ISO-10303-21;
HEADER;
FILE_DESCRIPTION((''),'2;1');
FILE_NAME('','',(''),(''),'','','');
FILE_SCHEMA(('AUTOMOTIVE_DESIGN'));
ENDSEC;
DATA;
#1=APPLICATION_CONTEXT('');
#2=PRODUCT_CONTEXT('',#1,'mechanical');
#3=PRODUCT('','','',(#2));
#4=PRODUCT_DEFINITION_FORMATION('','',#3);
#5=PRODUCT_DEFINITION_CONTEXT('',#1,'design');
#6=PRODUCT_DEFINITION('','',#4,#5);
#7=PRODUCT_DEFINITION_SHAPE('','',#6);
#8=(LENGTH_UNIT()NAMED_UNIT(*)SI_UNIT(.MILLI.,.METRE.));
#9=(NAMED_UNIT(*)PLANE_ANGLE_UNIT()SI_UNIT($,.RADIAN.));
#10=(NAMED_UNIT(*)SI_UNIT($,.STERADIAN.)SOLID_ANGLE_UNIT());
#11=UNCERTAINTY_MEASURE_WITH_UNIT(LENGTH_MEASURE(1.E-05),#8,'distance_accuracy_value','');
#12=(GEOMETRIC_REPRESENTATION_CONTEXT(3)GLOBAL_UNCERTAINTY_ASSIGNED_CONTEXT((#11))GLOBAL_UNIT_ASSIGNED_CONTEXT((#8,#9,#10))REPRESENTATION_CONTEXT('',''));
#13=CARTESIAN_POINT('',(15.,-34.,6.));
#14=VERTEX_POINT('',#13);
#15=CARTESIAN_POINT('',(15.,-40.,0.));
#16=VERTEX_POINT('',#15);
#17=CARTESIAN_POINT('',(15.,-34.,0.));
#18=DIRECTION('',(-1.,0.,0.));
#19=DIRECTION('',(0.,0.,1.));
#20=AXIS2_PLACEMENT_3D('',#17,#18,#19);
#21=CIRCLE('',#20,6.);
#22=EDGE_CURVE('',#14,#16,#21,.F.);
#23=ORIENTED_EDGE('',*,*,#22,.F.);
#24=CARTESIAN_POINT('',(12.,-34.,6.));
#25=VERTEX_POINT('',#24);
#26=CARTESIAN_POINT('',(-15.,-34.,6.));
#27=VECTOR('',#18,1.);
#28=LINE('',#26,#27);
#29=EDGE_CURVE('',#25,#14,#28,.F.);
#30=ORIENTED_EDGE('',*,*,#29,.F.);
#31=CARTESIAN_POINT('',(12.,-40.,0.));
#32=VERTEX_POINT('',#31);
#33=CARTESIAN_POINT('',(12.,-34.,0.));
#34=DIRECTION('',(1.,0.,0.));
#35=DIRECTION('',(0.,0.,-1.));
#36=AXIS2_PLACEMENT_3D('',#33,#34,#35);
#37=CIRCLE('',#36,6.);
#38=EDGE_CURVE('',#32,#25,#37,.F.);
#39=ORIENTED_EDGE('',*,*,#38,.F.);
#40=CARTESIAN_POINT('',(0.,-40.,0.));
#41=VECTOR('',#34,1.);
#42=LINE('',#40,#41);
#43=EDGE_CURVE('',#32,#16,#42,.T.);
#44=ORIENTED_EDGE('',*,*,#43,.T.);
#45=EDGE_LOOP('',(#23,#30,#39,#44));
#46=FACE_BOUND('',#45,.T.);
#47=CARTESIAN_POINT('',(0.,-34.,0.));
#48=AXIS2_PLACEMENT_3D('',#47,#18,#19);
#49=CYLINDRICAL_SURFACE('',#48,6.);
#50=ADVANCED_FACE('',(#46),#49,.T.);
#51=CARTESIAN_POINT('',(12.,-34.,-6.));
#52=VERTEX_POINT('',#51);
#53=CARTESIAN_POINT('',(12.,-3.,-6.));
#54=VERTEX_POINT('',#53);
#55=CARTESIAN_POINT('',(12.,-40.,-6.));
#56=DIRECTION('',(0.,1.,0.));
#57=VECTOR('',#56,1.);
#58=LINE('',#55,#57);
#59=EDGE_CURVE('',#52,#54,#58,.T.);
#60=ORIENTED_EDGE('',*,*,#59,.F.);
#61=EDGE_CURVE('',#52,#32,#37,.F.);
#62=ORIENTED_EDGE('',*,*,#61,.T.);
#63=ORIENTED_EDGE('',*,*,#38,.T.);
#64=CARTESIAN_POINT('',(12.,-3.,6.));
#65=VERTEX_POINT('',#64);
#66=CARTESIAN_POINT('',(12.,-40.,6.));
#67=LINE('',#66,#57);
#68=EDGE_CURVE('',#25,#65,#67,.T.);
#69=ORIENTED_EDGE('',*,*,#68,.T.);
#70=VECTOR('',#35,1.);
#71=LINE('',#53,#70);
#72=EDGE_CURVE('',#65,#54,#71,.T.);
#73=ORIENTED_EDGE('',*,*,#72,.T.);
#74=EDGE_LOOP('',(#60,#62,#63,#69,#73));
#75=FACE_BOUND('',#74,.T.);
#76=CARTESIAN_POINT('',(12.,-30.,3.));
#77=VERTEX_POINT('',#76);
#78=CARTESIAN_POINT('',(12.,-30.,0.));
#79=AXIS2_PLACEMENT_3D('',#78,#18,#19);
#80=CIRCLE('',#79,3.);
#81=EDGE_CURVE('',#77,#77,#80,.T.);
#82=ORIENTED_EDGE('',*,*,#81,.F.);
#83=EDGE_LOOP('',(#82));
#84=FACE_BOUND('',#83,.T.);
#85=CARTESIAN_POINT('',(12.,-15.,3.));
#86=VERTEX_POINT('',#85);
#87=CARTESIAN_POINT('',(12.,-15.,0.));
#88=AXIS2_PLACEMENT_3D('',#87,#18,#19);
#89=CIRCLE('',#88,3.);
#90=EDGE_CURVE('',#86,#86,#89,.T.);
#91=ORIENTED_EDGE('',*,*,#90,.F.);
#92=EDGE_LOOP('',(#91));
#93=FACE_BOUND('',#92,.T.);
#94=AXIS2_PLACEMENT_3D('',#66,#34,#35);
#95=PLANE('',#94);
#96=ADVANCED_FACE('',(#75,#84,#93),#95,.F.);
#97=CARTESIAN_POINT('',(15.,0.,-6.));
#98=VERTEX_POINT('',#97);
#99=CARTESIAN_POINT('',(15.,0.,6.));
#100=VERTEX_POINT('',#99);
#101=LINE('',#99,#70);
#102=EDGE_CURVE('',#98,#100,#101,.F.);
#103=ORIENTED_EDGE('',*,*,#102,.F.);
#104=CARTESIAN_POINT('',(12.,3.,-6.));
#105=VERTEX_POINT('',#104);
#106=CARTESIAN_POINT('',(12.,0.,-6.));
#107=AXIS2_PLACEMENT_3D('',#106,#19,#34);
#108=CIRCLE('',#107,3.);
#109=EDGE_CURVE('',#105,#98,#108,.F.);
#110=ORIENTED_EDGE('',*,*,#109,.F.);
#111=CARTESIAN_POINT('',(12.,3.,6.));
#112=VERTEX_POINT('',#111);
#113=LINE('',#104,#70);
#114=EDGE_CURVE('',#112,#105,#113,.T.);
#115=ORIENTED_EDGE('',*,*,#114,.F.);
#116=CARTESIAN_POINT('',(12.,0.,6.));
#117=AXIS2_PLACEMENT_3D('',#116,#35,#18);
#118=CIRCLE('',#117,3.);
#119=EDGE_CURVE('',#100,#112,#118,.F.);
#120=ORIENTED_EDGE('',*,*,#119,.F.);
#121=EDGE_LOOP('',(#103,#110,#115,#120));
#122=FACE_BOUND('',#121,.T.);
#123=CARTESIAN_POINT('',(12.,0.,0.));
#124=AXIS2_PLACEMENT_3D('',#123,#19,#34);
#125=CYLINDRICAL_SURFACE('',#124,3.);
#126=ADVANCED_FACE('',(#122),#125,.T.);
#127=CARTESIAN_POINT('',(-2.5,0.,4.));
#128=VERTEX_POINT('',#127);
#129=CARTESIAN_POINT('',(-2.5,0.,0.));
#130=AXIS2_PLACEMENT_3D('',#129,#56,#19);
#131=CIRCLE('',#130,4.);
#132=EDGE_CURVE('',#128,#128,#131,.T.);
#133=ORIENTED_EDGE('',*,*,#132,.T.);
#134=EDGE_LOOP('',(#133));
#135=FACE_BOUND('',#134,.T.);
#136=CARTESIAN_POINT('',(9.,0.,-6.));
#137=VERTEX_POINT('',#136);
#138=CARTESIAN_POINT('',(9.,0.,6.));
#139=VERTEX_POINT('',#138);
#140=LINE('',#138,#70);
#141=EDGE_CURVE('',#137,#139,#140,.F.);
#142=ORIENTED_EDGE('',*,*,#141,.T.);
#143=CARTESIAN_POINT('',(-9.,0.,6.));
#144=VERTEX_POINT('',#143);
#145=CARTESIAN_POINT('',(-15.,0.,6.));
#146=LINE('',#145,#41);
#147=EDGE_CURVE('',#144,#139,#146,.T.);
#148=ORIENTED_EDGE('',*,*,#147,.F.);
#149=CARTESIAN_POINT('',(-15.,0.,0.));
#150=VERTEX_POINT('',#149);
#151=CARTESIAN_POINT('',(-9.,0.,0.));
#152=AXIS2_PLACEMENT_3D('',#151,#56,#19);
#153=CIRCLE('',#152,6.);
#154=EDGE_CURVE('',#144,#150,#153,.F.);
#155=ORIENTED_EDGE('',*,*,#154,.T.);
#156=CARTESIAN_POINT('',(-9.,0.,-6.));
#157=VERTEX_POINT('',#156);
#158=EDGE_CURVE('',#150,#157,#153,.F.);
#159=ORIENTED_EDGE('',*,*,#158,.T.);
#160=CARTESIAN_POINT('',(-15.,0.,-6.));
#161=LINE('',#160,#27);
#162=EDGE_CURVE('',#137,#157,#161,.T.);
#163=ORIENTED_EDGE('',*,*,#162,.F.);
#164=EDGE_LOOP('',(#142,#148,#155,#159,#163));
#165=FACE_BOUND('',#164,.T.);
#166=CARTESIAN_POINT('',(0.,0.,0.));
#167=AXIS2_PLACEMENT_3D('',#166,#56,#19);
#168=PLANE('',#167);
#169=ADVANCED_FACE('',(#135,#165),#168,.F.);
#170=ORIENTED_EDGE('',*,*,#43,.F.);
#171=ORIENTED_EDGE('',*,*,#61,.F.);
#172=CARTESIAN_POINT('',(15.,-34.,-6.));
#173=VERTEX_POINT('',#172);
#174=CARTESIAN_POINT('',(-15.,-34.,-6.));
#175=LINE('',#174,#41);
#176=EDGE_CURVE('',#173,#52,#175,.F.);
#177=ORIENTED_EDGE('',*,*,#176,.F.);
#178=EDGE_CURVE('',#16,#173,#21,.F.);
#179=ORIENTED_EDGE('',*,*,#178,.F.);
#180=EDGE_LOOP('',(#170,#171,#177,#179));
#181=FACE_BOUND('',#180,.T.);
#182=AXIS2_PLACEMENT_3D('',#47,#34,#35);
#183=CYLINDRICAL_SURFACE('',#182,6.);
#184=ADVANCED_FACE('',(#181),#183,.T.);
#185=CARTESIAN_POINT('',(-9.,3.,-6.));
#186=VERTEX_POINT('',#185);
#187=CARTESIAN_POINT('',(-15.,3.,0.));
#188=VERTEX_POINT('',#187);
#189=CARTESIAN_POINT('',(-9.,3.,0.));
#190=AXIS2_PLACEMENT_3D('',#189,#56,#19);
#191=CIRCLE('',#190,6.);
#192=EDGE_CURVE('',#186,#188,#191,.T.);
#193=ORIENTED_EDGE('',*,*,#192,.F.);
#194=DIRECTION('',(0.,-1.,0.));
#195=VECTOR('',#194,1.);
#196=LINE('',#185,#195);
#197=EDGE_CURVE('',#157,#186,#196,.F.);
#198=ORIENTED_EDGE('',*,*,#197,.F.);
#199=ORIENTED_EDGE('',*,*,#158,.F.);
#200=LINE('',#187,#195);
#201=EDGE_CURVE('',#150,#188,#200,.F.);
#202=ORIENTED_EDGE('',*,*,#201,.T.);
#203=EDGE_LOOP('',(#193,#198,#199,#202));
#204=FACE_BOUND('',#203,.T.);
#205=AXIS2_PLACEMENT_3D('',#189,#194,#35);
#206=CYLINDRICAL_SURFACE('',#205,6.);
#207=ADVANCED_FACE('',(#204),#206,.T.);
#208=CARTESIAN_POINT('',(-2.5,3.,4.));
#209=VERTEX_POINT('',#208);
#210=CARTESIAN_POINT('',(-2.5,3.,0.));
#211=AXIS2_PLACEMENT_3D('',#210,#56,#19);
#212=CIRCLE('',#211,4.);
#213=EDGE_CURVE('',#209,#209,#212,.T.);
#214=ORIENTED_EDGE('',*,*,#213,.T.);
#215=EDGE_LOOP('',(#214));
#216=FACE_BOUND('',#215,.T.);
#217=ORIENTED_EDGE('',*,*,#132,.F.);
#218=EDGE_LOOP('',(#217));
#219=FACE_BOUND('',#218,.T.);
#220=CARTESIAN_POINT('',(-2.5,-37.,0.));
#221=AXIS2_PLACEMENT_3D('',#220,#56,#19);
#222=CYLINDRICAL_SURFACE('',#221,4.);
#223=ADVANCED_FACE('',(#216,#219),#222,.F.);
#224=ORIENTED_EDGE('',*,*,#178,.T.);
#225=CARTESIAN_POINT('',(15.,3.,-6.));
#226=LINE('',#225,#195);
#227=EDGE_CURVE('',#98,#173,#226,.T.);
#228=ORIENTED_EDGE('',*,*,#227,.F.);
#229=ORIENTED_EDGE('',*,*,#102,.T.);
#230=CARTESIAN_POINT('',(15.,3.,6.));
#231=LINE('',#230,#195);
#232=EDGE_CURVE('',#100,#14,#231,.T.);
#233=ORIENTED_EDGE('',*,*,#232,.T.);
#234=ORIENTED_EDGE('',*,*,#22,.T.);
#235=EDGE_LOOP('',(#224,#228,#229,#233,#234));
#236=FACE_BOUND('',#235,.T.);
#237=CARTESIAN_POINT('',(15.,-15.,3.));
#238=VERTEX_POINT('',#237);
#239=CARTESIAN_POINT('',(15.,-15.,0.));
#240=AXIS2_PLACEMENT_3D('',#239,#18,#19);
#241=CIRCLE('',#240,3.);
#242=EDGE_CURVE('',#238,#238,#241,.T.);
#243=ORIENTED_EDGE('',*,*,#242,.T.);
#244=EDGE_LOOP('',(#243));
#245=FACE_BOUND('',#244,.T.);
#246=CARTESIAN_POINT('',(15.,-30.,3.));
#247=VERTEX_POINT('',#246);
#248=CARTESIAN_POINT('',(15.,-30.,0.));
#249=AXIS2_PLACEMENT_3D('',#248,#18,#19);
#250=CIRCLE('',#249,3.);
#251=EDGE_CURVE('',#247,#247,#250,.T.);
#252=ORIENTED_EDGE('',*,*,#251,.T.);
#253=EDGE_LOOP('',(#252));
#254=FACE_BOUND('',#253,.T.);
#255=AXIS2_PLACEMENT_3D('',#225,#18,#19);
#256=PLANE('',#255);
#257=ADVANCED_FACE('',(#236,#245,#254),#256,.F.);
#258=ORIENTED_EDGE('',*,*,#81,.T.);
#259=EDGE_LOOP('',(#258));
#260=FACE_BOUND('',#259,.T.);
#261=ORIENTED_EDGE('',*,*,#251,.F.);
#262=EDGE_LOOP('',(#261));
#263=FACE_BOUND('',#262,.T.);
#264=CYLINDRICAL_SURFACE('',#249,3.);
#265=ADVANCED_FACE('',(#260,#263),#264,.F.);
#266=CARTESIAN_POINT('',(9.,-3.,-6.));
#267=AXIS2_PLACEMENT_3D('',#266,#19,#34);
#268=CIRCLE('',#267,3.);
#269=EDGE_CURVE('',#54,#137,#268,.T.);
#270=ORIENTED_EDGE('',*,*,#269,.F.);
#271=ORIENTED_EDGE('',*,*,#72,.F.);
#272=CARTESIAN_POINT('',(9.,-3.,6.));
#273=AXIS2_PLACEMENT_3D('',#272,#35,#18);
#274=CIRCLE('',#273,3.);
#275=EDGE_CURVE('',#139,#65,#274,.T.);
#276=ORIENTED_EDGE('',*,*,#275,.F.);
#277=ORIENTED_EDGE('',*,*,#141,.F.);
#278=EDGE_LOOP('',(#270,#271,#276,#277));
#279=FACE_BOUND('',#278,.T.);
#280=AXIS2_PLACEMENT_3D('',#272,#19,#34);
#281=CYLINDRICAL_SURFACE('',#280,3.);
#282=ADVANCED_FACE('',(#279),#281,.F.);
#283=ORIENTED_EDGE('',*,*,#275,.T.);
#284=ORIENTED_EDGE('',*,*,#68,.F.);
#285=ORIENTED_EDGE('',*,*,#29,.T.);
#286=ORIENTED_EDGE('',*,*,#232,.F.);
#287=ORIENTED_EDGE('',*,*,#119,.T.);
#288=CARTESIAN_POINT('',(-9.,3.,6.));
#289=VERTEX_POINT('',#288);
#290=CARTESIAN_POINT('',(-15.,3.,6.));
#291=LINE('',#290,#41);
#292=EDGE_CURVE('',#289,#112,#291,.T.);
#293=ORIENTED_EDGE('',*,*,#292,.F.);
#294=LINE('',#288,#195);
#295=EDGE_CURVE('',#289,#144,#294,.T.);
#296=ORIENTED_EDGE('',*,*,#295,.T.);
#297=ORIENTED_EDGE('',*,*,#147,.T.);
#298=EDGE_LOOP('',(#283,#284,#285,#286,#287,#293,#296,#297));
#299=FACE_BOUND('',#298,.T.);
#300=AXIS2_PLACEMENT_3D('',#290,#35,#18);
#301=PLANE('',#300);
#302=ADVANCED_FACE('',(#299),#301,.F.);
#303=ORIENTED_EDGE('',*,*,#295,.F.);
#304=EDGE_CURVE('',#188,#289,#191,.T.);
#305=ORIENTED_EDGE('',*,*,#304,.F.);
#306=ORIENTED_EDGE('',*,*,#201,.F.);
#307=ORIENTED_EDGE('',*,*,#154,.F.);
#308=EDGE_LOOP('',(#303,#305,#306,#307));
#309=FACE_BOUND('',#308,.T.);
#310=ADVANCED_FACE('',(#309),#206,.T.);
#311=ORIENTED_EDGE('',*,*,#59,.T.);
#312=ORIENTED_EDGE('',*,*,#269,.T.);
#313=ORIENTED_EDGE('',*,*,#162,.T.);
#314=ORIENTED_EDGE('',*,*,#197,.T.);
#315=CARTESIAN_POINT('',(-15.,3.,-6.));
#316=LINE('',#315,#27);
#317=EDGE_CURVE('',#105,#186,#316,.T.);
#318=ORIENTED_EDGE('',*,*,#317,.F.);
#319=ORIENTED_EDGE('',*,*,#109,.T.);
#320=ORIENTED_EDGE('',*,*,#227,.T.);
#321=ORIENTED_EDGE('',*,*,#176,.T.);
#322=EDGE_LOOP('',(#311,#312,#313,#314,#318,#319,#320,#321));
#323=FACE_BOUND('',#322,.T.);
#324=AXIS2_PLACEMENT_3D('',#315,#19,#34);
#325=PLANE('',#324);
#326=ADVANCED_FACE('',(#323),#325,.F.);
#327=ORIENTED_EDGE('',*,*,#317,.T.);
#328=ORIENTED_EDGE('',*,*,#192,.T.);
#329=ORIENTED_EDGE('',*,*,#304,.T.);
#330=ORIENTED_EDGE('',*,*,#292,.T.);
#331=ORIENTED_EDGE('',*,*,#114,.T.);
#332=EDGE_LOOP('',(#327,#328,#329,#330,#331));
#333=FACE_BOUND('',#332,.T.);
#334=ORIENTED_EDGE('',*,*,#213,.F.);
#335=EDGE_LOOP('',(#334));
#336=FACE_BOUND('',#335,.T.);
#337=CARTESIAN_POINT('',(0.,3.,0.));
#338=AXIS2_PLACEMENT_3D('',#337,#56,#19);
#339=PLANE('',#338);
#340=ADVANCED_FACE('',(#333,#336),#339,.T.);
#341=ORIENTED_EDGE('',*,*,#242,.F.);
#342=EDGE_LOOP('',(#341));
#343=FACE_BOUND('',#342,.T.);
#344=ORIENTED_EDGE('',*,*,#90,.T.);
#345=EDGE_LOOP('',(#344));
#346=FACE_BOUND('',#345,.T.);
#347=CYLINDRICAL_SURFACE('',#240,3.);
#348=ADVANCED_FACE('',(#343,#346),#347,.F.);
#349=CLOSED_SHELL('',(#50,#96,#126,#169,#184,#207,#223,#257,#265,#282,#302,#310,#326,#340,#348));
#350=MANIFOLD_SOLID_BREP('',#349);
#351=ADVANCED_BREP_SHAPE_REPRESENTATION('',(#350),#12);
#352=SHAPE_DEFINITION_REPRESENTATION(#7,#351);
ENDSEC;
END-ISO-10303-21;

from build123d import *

# Parameters (mm, degrees)
SKETCH1_W           = 30
SKETCH1_H           = 12
BOSS_EXTRUDE1_DEPTH = 3
SKETCH2_W           = 3
SKETCH2_H           = 12
BOSS_EXTRUDE2_DEPTH = 40
FILLET1_R           = 3
FILLET2_R           = 3
SKETCH3_R           = 4
CUT_EXTRUDE1_DEPTH  = 40
SKETCH4_R           = 3
CUT_EXTRUDE3_DEPTH  = 49.631265663
FILLET3_R           = 6
FILLET4_R           = 6


with BuildPart() as part:
    # Sketch1 → Boss-Extrude1 (new body)
    with BuildSketch(Plane(origin=(0, 0, 0), x_dir=(1, 0, 0), z_dir=(0, 1, 0))):
        Rectangle(SKETCH1_W, SKETCH1_H)
    extrude(amount=BOSS_EXTRUDE1_DEPTH)

    # Sketch2 → Boss-Extrude2 (add)
    with BuildSketch(Plane.XZ):
        with Locations((13.5, 0)):
            Rectangle(SKETCH2_W, SKETCH2_H)
    extrude(amount=BOSS_EXTRUDE2_DEPTH)

    # Fillet1
    fillet1_edges = [part.edges().sort_by_distance(p)[0] for p in [
        (15, 3, 0),
    ]]
    fillet(fillet1_edges, radius=FILLET1_R)

    # Fillet2
    fillet2_edges = [part.edges().sort_by_distance(p)[0] for p in [
        (12, 0, 0),
    ]]
    fillet(fillet2_edges, radius=FILLET2_R)

    # Sketch3 → Cut-Extrude1 (cut)
    with BuildSketch(Plane(origin=(0, 3, 0), x_dir=(1, 0, 0), z_dir=(0, 1, 0))):
        with Locations(Location((-2.5, 0, 0), (0, 0, 270))):
            Circle(SKETCH3_R)
    extrude(amount=-CUT_EXTRUDE1_DEPTH, mode=Mode.SUBTRACT)

    # Sketch4 → Cut-Extrude3 (cut, through all)
    with BuildSketch(Plane.ZY.offset(-12)):
        with Locations((0, -15)):
            Circle(SKETCH4_R)
        with Locations((0, -30)):
            Circle(SKETCH4_R)
    extrude(amount=-CUT_EXTRUDE3_DEPTH, mode=Mode.SUBTRACT)

    # Fillet3
    fillet3_edges = [part.edges().sort_by_distance(p)[0] for p in [
        (-15, 1.5, -6),
        (-15, 1.5, 6),
    ]]
    fillet(fillet3_edges, radius=FILLET3_R - 0.0001)  # a hair under: the kernel refuses the full size

    # Fillet4
    fillet4_edges = [part.edges().sort_by_distance(p)[0] for p in [
        (13.5, -40, 6),
        (13.5, -40, -6),
    ]]
    fillet(fillet4_edges, radius=FILLET4_R - 0.0001)  # a hair under: the kernel refuses the full size


solid = part.part
